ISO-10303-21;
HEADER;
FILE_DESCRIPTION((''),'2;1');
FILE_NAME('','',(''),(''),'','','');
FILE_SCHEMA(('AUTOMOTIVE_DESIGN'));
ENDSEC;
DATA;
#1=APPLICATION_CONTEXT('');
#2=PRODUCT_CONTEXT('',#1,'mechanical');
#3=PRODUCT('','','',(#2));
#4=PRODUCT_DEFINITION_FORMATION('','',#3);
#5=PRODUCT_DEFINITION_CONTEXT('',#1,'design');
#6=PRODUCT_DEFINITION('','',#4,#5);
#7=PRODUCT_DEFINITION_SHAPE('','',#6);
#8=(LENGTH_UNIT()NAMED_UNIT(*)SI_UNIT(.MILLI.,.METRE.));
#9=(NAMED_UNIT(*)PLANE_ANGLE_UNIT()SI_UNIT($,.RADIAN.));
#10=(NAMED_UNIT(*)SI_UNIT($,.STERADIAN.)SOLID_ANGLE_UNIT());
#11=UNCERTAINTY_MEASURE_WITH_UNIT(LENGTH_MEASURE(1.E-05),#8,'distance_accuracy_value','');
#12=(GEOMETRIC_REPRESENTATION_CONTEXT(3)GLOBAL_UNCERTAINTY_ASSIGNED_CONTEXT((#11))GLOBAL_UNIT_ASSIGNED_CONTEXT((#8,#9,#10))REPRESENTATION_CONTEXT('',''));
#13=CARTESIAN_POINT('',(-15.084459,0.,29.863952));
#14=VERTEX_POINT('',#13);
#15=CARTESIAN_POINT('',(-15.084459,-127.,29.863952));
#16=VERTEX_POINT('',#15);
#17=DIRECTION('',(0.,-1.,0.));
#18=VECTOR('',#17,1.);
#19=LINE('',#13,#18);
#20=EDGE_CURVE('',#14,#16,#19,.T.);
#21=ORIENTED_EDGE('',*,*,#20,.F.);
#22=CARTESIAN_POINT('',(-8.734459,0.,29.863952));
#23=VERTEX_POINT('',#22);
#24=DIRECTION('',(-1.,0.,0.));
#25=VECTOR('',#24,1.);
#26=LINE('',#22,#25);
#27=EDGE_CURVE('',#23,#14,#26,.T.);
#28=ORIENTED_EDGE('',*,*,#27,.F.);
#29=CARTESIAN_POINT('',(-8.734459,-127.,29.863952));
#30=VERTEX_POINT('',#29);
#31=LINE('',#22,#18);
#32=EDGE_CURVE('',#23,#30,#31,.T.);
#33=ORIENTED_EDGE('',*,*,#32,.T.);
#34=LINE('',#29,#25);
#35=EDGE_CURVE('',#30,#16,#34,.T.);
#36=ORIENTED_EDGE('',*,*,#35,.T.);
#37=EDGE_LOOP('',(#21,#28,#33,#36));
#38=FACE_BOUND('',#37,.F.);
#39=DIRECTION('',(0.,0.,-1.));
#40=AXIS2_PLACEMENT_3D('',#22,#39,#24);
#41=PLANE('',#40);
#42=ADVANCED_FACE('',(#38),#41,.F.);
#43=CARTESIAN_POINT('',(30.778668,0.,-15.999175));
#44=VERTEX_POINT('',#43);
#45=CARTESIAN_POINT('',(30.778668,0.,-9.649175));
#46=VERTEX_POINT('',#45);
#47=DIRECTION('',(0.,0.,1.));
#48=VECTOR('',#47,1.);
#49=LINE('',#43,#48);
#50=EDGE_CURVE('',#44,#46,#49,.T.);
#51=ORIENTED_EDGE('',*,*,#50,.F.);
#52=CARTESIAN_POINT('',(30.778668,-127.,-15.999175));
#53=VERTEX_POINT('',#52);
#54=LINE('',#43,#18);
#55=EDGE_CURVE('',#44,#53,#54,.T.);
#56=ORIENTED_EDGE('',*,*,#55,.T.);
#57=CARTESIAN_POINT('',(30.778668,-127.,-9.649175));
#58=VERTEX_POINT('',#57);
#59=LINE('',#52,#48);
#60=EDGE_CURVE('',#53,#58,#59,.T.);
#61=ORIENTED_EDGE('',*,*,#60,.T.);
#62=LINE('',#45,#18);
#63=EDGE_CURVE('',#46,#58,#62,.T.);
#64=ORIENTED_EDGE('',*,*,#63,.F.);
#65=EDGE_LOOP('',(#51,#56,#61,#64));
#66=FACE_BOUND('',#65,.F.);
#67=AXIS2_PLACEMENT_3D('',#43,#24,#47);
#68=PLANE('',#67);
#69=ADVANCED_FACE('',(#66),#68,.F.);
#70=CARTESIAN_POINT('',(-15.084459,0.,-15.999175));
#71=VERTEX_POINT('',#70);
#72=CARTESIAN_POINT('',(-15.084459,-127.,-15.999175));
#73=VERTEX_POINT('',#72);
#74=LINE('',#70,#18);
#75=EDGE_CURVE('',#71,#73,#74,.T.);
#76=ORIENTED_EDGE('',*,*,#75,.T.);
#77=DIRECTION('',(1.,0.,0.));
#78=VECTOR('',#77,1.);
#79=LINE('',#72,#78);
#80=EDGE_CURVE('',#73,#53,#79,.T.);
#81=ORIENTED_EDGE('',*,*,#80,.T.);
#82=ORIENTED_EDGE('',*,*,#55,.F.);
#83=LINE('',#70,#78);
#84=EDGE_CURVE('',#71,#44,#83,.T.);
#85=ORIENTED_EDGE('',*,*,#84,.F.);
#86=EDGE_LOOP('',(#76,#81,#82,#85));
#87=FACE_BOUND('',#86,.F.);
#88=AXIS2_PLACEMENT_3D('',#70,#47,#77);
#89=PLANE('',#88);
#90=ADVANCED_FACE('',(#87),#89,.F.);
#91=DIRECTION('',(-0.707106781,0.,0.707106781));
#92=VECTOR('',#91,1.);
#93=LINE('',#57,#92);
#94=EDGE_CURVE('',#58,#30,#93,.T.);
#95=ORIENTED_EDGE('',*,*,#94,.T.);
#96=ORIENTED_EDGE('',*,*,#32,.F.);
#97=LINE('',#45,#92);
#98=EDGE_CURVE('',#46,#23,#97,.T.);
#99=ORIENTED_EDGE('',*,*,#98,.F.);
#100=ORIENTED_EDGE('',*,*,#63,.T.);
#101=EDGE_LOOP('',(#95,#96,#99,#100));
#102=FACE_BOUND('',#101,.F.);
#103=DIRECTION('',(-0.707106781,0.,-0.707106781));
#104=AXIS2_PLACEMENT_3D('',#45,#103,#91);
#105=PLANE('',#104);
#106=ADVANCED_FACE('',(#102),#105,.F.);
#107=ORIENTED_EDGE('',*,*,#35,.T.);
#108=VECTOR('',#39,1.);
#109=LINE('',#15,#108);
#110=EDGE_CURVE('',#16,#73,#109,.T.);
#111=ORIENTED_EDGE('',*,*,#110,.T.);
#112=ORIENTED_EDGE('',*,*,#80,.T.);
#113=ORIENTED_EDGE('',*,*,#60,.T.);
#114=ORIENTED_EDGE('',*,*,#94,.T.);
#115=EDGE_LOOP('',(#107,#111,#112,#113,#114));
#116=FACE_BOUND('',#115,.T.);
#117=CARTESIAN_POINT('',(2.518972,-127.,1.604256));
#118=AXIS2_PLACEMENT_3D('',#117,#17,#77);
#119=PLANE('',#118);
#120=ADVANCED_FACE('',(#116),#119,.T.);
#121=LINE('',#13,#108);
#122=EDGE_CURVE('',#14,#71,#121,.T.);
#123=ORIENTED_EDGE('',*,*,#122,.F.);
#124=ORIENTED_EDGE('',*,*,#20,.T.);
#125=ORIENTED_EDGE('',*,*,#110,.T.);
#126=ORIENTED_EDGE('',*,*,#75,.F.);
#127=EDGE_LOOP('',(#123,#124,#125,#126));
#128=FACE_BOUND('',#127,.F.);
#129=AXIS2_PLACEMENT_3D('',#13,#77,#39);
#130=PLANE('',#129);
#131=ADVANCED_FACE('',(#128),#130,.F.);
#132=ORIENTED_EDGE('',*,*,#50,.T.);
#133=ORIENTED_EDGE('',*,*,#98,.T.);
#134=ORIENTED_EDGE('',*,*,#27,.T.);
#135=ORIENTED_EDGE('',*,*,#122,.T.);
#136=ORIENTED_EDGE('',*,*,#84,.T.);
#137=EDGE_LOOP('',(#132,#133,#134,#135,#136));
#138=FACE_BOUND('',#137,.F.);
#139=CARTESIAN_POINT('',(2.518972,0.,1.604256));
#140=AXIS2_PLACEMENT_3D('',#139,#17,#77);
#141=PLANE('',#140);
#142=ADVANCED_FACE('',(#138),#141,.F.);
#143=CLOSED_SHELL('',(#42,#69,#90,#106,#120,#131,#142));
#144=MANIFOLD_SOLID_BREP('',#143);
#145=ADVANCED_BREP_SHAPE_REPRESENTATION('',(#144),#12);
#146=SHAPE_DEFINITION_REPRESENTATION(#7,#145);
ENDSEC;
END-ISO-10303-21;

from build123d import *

# Parameters (mm, degrees)
F2_DEPTH = 127


# Not quite as in the source:
# - a variable given as a bare number and used for a length is read in inches; the dataset says mm whatever the document's units were


with BuildPart() as f2:
    # F1 (on Front) → F2 (new body)
    with BuildSketch(Plane.XZ):
        Polygon((-8.7344590575, 29.8639517277), (-15.0844590575, 29.8639517277), (-15.0844590575, -15.999175205), (30.7786678753, -15.999175205), (30.7786678753, -9.649175205), align=None)
    extrude(amount=F2_DEPTH)


solid = f2.part
